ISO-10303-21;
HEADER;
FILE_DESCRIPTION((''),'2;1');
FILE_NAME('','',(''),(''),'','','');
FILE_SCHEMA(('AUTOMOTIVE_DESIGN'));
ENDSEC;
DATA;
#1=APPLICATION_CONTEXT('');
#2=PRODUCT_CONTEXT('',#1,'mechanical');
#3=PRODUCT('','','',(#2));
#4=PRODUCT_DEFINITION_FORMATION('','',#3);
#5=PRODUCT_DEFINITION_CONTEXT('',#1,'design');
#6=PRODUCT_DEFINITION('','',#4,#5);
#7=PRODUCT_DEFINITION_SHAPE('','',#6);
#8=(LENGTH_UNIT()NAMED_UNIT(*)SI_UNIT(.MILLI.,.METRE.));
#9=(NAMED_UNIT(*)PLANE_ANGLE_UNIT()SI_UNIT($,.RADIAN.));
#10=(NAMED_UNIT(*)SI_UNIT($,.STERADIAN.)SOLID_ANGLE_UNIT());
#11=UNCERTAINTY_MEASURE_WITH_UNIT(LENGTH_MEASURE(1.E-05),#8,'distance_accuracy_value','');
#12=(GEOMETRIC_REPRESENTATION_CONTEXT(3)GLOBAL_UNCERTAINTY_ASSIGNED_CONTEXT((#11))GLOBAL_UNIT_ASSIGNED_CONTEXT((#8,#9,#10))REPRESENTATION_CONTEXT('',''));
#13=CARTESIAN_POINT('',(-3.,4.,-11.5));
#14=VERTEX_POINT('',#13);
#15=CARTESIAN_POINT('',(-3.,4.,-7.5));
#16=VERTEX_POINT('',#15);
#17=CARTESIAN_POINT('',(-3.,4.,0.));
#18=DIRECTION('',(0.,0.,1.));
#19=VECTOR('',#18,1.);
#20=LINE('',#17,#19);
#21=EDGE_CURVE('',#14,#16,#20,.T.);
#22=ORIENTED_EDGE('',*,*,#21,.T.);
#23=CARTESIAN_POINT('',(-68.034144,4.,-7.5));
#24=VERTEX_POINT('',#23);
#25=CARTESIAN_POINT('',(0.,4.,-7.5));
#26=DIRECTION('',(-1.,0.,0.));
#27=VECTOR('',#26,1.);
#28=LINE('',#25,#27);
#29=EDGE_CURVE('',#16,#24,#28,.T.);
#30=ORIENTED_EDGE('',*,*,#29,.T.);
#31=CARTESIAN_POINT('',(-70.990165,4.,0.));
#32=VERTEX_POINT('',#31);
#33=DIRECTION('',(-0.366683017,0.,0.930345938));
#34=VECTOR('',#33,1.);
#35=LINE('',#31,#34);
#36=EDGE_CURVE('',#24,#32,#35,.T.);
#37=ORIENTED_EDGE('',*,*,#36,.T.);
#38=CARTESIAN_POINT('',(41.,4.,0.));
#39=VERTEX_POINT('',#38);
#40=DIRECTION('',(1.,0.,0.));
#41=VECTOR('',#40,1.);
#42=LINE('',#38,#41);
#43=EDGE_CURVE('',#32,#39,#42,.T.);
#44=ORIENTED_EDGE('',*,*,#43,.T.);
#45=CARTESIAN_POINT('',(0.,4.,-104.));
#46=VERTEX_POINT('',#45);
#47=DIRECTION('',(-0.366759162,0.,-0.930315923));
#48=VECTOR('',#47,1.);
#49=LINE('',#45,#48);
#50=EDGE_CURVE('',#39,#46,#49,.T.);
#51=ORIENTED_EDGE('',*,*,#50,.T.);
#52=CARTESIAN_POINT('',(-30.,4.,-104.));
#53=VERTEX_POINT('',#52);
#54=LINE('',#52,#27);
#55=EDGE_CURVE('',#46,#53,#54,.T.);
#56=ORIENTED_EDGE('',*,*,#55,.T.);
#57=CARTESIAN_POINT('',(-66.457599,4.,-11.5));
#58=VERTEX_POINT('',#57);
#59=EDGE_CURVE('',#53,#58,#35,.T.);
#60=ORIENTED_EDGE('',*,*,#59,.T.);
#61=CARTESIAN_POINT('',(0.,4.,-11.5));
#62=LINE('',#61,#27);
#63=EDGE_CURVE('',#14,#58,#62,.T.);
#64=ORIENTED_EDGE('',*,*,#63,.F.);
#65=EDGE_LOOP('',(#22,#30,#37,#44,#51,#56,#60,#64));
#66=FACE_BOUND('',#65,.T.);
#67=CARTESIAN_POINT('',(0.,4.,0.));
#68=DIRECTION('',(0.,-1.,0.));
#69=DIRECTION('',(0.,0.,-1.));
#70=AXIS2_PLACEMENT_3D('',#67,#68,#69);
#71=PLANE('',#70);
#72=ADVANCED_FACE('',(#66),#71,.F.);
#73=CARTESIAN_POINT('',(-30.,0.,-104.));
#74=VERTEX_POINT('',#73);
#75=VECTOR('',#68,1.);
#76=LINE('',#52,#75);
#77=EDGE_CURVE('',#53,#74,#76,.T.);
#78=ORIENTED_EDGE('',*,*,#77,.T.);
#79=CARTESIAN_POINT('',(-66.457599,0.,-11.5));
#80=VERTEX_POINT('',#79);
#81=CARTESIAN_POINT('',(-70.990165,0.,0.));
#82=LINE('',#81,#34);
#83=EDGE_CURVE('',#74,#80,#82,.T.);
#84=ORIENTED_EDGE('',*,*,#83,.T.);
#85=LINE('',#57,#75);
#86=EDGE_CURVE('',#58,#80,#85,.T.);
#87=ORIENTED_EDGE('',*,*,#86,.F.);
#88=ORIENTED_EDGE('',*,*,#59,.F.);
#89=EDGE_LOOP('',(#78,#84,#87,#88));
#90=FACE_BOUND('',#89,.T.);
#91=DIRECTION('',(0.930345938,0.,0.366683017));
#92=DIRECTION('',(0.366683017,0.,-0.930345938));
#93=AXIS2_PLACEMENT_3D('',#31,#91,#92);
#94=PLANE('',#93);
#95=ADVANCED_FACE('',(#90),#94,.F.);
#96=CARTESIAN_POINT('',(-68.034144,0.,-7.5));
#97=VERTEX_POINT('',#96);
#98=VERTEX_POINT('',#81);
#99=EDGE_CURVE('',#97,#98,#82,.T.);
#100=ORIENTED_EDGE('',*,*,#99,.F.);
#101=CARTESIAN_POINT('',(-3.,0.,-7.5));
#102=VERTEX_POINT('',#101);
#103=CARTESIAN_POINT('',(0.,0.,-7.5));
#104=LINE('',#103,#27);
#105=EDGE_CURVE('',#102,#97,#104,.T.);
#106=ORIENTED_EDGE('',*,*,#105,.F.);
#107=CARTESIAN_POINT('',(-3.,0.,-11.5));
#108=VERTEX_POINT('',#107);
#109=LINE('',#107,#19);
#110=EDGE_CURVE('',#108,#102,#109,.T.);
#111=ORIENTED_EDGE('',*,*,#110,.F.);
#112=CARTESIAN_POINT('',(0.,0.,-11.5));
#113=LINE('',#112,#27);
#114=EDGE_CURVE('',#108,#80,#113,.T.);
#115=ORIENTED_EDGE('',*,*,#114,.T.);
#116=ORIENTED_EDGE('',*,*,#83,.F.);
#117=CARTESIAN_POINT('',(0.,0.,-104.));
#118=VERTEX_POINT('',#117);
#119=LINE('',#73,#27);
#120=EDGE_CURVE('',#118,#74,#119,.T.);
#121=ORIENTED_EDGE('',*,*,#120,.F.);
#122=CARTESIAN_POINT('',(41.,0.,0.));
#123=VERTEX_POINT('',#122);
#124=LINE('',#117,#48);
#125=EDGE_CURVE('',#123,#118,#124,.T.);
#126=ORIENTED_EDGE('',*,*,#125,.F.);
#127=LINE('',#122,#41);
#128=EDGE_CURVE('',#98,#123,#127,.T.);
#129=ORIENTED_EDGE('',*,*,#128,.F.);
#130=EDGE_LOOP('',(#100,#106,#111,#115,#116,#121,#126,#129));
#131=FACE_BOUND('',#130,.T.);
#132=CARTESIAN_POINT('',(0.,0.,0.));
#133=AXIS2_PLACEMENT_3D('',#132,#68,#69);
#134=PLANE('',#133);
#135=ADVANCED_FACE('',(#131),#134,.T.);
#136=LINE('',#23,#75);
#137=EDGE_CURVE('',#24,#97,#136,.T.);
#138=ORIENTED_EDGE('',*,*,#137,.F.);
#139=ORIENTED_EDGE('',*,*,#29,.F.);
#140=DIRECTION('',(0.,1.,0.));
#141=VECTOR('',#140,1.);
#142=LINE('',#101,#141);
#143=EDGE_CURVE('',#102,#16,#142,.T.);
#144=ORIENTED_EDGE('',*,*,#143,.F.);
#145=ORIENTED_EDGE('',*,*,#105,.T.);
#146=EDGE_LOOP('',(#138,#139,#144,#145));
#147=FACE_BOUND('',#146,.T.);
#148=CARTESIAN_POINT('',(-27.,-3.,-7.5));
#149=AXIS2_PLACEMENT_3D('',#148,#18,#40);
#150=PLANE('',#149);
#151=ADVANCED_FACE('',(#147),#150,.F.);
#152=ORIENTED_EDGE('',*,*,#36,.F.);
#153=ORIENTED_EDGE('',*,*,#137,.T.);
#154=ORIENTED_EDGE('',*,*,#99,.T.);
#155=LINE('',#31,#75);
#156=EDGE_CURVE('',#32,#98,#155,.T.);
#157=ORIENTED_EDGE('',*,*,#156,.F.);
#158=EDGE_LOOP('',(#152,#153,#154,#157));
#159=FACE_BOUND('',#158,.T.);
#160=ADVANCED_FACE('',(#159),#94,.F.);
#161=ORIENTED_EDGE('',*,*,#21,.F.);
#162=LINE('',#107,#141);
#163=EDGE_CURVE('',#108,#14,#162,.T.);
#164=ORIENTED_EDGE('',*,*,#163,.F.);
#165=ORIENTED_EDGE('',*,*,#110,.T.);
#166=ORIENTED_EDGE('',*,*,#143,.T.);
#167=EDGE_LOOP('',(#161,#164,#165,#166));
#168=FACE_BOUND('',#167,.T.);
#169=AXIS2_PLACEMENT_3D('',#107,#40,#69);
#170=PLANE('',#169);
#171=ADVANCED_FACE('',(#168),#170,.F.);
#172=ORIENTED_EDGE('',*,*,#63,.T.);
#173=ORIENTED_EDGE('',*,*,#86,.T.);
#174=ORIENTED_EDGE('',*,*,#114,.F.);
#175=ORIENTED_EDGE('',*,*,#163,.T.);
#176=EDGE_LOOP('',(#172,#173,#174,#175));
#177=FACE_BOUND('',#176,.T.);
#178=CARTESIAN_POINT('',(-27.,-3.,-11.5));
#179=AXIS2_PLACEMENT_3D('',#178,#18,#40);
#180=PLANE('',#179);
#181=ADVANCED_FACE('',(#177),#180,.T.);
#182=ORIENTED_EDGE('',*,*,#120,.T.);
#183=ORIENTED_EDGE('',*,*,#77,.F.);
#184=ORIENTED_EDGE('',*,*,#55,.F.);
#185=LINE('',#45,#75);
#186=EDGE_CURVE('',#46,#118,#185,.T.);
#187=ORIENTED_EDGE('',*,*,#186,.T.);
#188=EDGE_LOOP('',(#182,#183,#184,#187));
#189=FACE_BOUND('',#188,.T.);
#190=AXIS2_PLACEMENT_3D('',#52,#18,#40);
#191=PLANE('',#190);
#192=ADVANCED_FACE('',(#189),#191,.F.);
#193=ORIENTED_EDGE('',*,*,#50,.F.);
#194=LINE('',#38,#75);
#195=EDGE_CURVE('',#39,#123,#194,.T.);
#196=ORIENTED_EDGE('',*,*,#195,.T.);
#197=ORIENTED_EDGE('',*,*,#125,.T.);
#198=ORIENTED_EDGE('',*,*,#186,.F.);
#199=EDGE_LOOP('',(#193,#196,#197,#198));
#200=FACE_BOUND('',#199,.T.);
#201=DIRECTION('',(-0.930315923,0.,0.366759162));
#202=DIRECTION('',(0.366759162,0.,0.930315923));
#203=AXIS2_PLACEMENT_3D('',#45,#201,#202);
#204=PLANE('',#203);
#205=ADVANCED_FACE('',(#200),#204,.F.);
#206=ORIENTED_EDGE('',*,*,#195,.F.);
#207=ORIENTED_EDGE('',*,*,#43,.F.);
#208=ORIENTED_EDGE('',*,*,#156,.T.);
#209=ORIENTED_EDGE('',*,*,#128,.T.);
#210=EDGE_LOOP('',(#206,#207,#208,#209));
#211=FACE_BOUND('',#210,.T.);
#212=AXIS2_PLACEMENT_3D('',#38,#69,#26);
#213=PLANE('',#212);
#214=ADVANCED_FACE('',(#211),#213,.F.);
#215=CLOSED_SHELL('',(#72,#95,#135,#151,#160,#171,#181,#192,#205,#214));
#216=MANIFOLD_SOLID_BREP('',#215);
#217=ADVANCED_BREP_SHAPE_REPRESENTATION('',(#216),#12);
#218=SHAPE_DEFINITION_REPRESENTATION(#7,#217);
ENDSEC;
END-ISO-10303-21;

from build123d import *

# Parameters (mm, degrees)
SM_BASE_FLANGE_1_DEPTH   = 4
OTHER_START              = -11.5
OTHER_2_DEPTH            = 4
CUT_EXTRUDE_1_DEPTH      = 126.982552614
CUT_EXTRUDE_1_DEPTH_BACK = 126.982552614
SKETCH_7_W               = 3.023259835
SKETCH_7_H               = 4


# Read off the part's stored shape, not the designer's step: Полость2
# Sheet-metal steps are written as plain solids
with BuildPart() as part:
    # Sketch 2 → Базовая кромка1 (new body)
    with BuildSketch(Plane(origin=(0, 0, 0), x_dir=(1, 0, 0), z_dir=(0, 1, 0))):
        Polygon((41, 0), (-70.990165257, 0), (-30, 104), (0, 104), align=None)
    extrude(amount=SM_BASE_FLANGE_1_DEPTH)

    # Полость2 outline → Полость2 (cut)
    with BuildSketch(Plane.XY.offset(OTHER_START)):
        Polygon((-70, 0), (-3, 0), (-6.023259835, 4), (-70, 4), align=None)
    extrude(amount=OTHER_2_DEPTH, mode=Mode.SUBTRACT)

    # Эскиз7 → Вырез-Вытянуть1 (cut, two sides: drawn at the far end of the back side and taken through both)
    with BuildSketch(Plane(origin=(0, 4, 0), x_dir=(1, 0, 0), z_dir=(0, 1, 0)).offset(-CUT_EXTRUDE_1_DEPTH_BACK)):
        with Locations((-4.511629918, 9.5)):
            Rectangle(SKETCH_7_W, SKETCH_7_H)
    extrude(amount=CUT_EXTRUDE_1_DEPTH + CUT_EXTRUDE_1_DEPTH_BACK, mode=Mode.SUBTRACT)


solid = part.part
